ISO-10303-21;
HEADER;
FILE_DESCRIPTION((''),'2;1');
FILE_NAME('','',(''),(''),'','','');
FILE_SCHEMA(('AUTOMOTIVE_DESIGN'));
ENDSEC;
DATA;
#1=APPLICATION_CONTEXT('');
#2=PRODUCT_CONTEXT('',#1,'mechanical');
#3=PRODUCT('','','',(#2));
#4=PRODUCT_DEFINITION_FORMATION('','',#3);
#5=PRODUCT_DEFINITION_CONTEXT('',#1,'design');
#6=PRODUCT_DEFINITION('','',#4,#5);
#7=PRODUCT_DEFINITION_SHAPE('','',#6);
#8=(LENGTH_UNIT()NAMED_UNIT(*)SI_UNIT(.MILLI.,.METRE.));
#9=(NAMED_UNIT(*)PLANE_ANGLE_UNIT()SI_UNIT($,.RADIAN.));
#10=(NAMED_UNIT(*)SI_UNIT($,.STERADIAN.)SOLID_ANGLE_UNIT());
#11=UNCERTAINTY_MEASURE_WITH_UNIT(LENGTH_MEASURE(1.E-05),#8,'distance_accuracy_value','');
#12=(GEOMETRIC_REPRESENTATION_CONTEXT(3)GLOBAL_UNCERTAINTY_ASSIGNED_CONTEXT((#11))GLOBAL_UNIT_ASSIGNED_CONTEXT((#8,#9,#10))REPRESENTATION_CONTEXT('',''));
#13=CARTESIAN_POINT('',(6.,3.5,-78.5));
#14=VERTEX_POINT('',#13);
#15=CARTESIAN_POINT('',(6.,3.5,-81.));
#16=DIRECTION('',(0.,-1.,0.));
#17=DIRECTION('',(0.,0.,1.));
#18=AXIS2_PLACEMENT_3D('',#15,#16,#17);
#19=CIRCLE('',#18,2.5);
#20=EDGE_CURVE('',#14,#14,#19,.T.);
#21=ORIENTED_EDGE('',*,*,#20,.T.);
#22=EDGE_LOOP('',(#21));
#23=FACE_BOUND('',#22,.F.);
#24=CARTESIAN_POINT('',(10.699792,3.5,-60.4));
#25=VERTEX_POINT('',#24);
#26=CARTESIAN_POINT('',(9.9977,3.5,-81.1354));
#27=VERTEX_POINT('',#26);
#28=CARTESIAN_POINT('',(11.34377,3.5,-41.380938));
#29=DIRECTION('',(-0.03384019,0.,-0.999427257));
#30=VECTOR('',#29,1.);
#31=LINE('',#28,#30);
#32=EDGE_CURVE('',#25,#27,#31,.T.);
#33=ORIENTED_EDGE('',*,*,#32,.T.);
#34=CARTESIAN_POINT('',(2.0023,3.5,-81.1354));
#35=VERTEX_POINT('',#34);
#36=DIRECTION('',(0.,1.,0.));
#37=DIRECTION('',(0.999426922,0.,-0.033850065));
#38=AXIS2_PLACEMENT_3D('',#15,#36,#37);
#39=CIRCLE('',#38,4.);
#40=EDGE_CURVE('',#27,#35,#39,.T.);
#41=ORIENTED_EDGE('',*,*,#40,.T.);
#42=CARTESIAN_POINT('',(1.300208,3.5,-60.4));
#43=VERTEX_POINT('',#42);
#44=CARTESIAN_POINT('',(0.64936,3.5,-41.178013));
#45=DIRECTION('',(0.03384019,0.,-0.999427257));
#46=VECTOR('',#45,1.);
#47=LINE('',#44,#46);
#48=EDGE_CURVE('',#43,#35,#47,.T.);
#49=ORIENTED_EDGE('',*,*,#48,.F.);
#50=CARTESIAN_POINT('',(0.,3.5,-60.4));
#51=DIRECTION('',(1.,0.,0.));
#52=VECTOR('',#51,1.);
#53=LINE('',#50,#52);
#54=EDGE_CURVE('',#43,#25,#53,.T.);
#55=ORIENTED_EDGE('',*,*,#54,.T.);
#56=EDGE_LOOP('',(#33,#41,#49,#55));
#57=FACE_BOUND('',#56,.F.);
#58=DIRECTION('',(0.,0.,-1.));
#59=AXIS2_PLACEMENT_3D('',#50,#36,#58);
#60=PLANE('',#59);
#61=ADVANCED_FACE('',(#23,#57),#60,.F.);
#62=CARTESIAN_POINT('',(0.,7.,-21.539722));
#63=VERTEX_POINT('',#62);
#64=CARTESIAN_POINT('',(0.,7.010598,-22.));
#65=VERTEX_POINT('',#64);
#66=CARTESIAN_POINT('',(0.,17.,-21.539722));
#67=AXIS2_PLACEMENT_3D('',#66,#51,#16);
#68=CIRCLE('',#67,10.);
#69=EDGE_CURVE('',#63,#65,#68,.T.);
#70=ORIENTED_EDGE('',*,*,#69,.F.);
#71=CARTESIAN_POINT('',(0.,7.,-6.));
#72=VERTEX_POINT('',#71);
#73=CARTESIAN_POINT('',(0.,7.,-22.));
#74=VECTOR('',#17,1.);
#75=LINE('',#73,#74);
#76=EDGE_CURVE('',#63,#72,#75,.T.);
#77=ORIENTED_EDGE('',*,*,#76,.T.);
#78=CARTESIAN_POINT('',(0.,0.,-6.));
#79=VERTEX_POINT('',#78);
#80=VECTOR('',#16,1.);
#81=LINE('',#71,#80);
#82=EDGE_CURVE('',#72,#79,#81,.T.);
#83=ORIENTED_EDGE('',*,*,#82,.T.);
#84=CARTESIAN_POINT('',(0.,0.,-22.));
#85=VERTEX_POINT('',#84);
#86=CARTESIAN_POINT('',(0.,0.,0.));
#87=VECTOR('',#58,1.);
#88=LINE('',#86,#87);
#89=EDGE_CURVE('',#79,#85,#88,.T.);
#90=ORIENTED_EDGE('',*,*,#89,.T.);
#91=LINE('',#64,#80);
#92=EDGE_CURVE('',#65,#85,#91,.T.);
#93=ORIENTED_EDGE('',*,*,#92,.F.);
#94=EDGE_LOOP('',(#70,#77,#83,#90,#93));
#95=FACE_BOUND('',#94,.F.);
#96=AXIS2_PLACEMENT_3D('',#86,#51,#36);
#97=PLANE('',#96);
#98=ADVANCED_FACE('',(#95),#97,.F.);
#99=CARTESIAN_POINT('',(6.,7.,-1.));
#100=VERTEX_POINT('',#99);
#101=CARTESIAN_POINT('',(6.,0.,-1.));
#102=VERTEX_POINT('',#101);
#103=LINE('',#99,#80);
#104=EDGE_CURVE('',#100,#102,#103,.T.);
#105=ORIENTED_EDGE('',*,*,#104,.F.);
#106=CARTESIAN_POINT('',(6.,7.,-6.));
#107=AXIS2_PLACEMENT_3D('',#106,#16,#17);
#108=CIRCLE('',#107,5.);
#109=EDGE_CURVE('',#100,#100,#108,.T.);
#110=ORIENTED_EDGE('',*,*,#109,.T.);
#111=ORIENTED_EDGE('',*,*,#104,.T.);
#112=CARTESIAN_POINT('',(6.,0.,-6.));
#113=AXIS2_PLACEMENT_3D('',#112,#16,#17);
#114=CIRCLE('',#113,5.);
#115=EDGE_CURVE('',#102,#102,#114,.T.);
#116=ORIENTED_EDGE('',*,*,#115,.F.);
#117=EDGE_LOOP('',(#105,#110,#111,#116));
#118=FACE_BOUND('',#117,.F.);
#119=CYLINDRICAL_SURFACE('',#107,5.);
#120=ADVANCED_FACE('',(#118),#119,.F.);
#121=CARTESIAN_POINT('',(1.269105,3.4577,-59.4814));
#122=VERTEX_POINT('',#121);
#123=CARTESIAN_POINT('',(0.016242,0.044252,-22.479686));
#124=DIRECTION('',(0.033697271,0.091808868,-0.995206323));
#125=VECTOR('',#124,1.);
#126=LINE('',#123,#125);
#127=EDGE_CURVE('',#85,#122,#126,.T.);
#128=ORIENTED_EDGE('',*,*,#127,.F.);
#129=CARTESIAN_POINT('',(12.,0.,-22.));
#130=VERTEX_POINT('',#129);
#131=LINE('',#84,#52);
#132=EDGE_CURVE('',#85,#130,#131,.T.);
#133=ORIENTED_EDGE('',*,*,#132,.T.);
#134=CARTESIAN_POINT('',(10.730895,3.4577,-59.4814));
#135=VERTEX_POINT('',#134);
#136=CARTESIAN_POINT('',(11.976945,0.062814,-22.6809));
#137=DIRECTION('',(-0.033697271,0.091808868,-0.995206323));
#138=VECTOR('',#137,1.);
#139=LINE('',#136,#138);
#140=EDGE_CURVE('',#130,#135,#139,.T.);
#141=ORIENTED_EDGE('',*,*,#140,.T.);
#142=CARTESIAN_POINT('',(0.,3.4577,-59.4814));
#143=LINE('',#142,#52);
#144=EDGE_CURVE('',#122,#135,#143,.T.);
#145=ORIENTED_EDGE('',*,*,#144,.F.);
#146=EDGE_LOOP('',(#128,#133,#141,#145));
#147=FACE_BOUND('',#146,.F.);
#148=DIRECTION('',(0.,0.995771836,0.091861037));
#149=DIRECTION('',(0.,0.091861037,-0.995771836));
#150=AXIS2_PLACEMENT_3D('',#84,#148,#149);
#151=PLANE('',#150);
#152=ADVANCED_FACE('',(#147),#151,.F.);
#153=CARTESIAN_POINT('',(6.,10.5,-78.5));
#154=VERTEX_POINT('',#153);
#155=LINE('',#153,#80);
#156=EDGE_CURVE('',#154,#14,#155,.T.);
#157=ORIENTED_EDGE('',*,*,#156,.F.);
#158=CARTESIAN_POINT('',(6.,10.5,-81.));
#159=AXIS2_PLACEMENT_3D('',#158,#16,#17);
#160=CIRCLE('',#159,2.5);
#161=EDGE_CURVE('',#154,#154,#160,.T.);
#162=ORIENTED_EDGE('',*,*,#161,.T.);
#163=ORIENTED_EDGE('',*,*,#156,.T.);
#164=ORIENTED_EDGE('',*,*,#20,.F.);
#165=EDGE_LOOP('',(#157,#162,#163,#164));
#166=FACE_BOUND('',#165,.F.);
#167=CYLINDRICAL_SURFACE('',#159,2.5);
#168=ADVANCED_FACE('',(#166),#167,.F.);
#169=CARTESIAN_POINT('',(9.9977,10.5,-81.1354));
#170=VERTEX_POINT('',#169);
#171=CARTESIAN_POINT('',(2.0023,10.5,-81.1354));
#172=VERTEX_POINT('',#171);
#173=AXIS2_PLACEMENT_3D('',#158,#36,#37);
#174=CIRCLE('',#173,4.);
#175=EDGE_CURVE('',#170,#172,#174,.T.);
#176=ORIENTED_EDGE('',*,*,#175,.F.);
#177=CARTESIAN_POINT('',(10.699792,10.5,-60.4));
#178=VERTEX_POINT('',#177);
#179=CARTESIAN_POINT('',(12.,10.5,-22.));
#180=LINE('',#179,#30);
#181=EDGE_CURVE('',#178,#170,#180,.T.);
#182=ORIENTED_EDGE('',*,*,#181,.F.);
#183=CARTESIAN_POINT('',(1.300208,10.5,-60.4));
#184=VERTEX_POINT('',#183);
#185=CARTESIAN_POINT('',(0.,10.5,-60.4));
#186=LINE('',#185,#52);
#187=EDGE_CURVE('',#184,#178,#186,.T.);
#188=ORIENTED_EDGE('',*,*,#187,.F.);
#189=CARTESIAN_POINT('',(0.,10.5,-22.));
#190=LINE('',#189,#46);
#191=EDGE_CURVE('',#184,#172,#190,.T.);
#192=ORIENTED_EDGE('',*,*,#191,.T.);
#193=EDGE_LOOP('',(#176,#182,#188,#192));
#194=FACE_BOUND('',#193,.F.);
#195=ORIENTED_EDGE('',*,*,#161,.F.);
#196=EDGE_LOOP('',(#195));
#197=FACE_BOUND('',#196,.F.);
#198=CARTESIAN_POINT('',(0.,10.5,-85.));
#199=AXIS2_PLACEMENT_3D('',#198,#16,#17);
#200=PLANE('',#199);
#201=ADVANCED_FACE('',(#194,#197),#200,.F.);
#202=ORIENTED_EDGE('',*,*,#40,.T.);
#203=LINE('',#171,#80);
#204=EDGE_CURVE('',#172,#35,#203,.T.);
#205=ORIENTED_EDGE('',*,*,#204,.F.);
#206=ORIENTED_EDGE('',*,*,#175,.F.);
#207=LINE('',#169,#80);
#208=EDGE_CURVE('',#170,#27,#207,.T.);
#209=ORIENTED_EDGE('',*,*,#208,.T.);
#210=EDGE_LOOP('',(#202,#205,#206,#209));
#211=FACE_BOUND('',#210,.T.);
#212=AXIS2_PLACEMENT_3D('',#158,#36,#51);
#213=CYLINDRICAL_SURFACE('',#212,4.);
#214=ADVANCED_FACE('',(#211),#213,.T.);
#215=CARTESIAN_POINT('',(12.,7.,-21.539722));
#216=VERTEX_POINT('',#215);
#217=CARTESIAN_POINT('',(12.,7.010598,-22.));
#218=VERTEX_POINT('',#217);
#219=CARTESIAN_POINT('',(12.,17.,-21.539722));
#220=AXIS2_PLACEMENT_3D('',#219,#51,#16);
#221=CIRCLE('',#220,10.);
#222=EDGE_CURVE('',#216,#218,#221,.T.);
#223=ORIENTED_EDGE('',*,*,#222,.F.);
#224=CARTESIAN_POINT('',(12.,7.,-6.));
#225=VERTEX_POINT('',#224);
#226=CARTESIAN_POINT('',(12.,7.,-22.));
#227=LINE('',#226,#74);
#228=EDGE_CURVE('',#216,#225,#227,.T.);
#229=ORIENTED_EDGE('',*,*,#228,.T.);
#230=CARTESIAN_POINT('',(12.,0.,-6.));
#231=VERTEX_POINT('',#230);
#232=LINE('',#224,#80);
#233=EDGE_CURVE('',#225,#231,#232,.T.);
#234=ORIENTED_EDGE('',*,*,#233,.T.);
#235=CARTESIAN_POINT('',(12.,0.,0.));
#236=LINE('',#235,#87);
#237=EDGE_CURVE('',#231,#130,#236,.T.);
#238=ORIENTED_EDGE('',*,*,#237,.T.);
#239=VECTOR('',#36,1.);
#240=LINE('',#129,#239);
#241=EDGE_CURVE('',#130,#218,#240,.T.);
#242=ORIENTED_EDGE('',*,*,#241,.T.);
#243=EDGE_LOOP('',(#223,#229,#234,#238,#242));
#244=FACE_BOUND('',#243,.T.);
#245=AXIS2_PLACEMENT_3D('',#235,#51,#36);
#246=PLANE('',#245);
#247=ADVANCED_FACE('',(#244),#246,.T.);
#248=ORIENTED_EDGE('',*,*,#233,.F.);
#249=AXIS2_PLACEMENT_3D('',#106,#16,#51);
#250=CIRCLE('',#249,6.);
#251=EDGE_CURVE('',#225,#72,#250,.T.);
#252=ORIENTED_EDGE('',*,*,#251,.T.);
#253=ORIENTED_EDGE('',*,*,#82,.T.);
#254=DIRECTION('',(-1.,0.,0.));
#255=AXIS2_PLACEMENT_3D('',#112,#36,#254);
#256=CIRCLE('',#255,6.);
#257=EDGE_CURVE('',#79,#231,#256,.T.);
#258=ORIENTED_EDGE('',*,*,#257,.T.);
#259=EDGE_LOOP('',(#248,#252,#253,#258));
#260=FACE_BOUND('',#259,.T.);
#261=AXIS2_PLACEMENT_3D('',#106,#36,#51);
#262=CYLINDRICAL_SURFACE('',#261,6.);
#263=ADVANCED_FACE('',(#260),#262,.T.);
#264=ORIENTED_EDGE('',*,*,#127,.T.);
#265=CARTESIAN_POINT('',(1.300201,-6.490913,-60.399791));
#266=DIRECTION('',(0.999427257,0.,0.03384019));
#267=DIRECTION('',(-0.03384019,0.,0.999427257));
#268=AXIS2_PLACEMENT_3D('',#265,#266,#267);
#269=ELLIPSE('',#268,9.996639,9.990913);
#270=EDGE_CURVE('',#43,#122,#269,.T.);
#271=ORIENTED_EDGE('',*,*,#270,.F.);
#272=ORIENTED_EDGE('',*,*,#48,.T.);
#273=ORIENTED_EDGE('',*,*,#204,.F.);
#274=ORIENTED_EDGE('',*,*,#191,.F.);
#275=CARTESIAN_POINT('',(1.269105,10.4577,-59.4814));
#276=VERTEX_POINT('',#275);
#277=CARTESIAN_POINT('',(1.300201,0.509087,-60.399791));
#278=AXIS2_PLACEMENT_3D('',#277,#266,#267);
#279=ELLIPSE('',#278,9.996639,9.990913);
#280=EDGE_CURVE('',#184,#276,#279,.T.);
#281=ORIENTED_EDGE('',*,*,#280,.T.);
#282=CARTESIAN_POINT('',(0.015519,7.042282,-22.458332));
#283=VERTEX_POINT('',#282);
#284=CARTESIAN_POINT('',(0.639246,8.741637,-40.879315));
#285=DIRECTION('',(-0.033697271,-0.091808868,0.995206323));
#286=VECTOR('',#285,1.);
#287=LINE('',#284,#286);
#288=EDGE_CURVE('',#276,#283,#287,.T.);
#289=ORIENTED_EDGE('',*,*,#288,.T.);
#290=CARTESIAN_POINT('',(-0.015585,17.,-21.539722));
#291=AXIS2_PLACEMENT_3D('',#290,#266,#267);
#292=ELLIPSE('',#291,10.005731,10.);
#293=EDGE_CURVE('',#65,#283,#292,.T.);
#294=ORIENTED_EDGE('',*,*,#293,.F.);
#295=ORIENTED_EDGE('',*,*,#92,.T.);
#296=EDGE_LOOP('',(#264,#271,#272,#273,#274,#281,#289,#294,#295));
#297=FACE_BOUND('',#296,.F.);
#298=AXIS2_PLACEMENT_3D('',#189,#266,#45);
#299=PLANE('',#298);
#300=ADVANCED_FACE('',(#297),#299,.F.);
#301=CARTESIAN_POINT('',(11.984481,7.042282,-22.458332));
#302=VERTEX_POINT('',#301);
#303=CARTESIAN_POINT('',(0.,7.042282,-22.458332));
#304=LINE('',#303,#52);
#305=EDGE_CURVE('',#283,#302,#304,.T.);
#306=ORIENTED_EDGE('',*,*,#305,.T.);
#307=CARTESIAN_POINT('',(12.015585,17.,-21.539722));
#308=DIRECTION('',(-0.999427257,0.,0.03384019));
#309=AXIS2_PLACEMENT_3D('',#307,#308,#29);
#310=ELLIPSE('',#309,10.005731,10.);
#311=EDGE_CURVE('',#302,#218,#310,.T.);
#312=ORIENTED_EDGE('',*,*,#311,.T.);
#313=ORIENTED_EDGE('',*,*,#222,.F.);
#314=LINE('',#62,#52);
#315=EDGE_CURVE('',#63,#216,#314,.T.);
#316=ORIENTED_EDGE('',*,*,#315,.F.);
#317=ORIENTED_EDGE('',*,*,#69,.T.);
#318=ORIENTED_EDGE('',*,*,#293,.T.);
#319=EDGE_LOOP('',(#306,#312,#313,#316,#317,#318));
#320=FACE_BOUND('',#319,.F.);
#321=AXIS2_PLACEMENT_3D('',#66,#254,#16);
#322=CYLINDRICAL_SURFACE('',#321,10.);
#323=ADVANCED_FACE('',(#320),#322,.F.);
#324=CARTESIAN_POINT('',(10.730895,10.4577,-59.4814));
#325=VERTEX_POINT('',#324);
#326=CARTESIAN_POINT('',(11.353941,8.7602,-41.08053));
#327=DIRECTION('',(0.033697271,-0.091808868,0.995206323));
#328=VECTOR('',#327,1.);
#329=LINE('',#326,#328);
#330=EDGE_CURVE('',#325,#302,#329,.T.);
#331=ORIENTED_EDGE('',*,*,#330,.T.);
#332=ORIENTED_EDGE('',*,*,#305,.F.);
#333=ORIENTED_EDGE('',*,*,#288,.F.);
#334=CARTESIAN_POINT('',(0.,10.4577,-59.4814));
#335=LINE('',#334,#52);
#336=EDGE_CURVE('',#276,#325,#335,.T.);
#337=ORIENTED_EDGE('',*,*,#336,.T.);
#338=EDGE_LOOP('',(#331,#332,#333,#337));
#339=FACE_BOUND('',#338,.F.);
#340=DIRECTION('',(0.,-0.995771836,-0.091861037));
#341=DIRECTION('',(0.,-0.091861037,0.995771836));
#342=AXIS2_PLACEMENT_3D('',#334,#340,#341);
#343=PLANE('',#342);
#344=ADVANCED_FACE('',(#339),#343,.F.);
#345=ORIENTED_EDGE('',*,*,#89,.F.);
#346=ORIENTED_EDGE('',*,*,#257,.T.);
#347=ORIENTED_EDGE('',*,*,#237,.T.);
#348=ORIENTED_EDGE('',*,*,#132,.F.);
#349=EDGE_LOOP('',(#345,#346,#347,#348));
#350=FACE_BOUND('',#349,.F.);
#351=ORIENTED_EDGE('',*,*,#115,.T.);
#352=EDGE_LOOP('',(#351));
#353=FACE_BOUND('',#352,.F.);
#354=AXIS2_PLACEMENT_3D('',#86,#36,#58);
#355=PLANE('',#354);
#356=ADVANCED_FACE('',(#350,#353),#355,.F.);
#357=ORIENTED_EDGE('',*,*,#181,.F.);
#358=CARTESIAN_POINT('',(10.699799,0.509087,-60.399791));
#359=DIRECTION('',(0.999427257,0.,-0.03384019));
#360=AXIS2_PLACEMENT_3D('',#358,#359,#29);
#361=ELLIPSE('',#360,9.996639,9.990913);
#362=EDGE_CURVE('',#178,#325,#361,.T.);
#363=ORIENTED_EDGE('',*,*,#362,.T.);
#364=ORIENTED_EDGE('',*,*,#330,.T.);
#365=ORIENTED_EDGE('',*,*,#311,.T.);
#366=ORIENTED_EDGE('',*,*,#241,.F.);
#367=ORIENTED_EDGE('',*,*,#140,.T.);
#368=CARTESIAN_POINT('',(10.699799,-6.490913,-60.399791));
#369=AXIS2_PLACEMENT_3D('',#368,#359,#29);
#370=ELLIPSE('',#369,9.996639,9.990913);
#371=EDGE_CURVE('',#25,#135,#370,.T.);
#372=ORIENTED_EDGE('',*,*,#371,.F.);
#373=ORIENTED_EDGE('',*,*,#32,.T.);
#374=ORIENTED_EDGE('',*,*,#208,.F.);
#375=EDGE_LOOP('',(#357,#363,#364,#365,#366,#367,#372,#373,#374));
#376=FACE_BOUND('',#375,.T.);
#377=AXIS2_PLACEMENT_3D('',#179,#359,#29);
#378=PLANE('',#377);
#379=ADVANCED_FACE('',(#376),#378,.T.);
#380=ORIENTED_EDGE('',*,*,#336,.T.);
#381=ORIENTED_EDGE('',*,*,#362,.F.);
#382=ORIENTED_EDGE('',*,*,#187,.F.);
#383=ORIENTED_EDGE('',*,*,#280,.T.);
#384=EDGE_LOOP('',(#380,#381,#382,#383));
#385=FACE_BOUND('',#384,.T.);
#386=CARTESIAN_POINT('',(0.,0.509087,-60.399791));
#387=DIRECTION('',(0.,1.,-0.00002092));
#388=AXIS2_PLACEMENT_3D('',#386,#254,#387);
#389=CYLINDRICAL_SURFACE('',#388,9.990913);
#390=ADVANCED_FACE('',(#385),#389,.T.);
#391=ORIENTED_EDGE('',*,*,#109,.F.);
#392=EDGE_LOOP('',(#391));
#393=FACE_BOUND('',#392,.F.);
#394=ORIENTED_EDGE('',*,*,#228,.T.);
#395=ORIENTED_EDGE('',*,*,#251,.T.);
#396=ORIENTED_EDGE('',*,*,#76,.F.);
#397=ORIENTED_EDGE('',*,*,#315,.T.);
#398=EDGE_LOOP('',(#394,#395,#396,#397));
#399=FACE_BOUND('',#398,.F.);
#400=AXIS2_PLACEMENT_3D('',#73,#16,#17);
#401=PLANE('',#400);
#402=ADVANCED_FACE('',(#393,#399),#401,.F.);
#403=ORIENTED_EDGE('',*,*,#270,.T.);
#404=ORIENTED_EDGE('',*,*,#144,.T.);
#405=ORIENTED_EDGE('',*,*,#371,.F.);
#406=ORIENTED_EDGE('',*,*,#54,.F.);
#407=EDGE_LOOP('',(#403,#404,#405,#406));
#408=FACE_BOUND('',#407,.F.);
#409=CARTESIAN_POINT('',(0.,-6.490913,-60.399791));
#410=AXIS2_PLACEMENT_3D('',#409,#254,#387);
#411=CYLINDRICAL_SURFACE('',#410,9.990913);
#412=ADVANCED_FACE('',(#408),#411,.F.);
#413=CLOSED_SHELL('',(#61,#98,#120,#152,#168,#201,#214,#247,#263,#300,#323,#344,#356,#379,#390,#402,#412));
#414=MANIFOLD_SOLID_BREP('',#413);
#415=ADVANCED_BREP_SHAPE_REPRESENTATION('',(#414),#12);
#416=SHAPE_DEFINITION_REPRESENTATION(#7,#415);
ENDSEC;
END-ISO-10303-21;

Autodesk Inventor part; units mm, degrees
ref_plane "YZ Plane" through (0, 0, 0) normal (1, 0, 0) x (0, 1, 0)
ref_plane "XZ Plane" through (0, 0, 0) normal (0, 1, 0) x (-1, 0, 0)
ref_plane "XY Plane" through (0, 0, 0) normal (0, 0, 1) x (1, 0, 0)
sketch "Sketch19" plane through (0, 0, 0) normal (1, 0, 0) x (0, 1, 0)
  line L0 (0, 0) -> (0, -22)
  line L1 (0, -22) -> (3.4577, -59.4814)
  line L2 (3.5, -60.4) -> (3.5, -85)
  line L3 (3.5, -85) -> (10.5, -85)
  line L4 (10.5, -85) -> (10.5, -60.4)
  line L5 (10.4577, -59.4814) -> (7, -22)
  line L6 (7, -22) -> (7, 0)
  line L7 (7, 0) -> (0, 0)
  arc A0 (3.5, -60.4) -> (3.4577, -59.4814) centre (-6.5, -60.4) ccw
  arc A1 (10.5, -60.4) -> (10.4577, -59.4814) centre (0.5, -60.4) ccw
  point P0 (10.4894, -59.9402)
  dimension "d79" = 10
  dimension "d80" = 10
  dimension "d82" = 7
  dimension "d83" = 3.5
  dimension "d84" = 24.6
  dimension "d85" = 22
  dimension "d86" = 37.9402
extrude "Extrusion7" add sketch "Sketch19" along normal blind 12
sketch "Sketch20" plane through (0, 7, 0) normal (0, 1, 0) x (1, 0, 0)
  circle A0 centre (6, 6) radius 6
  line L0 (0, 0) -> (12, 0) projected
  line L1 (0, 0) -> (12, 0) projected
  line L2 (0, 0) -> (0, 6)
  line L3 (0, 0) -> (0, 22) projected
  line L4 (12, 0) -> (12, 6)
  point P0 (6, 0)
  point P1 (6, 0)
  dimension "d89" = 12
extrude "Extrusion8" cut sketch "Sketch20" against normal blind 12 contours L4 L0 A0 | A0 L0 L2
sketch "Sketch21" plane through (0, 10.5, -60.4) normal (0, 1, 0) x (1, 0, 0)
  circle A0 centre (6, 20.6) radius 4
  line L0 (0, 24.6) -> (12, 24.6) projected
  arc A1 (0, -54.4) -> (12, -54.4) centre (6, -54.4) ccw projected
  line L1 (12, -38.4) -> (12, -54.4) projected
  line L2 (0, -38.4) -> (12, -38.4) projected
  line L3 (0, -38.4) -> (0, -54.4) projected
  line L4 (0, -38.4) -> (2.0023, 20.7354)
  line L5 (12, -38.4) -> (12, -0.9186) projected
  line L6 (12, -38.4) -> (9.9977, 20.7354)
  line L7 (0, 24.6) -> (0, 0) projected
  line L8 (0, -38.4) -> (0, 24.6)
  line L9 (0, 24.6) -> (6, 24.6)
  line L10 (6, 24.6) -> (12, 24.6)
  line L11 (12, 0) -> (12, 24.6) projected
  line L12 (12, 24.6) -> (12, -38.4)
  point P0 (0, -60.4)
  point P1 (12, 0)
  dimension "d93" = 8
extrude "Extrusion9" cut sketch "Sketch21" against normal up to surface (10.5 mm away) contours A0 L0 L11 L12 L5 L6 | L4 L8 L7 L0 A0
sketch "Sketch22" plane through (6, 7, -6) normal (0, 1, 0) x (1, 0, 0)
  arc A0 (-6, 0) -> (6, 0) centre (0, 0) ccw projected
  point P0 (-6, -6)
hole "Hole1" at (6, 7, -6) direction (0, -1, 0) diameter 10 end through all
sketch "Sketch23" plane through (6, 10.5, -81) normal (0, 1, 0) x (1, 0, 0)
  arc A0 (3.9977, 0.1354) -> (-3.9977, 0.1354) centre (0, 0) ccw projected
  point P0 (-6, -81)
hole "Hole2" at (6, 10.5, -81) direction (0, -1, 0) diameter 5 end through all
fillet "Fillet1" radius 10 1 edges at (6, 7, -22)
properties part number "47"
